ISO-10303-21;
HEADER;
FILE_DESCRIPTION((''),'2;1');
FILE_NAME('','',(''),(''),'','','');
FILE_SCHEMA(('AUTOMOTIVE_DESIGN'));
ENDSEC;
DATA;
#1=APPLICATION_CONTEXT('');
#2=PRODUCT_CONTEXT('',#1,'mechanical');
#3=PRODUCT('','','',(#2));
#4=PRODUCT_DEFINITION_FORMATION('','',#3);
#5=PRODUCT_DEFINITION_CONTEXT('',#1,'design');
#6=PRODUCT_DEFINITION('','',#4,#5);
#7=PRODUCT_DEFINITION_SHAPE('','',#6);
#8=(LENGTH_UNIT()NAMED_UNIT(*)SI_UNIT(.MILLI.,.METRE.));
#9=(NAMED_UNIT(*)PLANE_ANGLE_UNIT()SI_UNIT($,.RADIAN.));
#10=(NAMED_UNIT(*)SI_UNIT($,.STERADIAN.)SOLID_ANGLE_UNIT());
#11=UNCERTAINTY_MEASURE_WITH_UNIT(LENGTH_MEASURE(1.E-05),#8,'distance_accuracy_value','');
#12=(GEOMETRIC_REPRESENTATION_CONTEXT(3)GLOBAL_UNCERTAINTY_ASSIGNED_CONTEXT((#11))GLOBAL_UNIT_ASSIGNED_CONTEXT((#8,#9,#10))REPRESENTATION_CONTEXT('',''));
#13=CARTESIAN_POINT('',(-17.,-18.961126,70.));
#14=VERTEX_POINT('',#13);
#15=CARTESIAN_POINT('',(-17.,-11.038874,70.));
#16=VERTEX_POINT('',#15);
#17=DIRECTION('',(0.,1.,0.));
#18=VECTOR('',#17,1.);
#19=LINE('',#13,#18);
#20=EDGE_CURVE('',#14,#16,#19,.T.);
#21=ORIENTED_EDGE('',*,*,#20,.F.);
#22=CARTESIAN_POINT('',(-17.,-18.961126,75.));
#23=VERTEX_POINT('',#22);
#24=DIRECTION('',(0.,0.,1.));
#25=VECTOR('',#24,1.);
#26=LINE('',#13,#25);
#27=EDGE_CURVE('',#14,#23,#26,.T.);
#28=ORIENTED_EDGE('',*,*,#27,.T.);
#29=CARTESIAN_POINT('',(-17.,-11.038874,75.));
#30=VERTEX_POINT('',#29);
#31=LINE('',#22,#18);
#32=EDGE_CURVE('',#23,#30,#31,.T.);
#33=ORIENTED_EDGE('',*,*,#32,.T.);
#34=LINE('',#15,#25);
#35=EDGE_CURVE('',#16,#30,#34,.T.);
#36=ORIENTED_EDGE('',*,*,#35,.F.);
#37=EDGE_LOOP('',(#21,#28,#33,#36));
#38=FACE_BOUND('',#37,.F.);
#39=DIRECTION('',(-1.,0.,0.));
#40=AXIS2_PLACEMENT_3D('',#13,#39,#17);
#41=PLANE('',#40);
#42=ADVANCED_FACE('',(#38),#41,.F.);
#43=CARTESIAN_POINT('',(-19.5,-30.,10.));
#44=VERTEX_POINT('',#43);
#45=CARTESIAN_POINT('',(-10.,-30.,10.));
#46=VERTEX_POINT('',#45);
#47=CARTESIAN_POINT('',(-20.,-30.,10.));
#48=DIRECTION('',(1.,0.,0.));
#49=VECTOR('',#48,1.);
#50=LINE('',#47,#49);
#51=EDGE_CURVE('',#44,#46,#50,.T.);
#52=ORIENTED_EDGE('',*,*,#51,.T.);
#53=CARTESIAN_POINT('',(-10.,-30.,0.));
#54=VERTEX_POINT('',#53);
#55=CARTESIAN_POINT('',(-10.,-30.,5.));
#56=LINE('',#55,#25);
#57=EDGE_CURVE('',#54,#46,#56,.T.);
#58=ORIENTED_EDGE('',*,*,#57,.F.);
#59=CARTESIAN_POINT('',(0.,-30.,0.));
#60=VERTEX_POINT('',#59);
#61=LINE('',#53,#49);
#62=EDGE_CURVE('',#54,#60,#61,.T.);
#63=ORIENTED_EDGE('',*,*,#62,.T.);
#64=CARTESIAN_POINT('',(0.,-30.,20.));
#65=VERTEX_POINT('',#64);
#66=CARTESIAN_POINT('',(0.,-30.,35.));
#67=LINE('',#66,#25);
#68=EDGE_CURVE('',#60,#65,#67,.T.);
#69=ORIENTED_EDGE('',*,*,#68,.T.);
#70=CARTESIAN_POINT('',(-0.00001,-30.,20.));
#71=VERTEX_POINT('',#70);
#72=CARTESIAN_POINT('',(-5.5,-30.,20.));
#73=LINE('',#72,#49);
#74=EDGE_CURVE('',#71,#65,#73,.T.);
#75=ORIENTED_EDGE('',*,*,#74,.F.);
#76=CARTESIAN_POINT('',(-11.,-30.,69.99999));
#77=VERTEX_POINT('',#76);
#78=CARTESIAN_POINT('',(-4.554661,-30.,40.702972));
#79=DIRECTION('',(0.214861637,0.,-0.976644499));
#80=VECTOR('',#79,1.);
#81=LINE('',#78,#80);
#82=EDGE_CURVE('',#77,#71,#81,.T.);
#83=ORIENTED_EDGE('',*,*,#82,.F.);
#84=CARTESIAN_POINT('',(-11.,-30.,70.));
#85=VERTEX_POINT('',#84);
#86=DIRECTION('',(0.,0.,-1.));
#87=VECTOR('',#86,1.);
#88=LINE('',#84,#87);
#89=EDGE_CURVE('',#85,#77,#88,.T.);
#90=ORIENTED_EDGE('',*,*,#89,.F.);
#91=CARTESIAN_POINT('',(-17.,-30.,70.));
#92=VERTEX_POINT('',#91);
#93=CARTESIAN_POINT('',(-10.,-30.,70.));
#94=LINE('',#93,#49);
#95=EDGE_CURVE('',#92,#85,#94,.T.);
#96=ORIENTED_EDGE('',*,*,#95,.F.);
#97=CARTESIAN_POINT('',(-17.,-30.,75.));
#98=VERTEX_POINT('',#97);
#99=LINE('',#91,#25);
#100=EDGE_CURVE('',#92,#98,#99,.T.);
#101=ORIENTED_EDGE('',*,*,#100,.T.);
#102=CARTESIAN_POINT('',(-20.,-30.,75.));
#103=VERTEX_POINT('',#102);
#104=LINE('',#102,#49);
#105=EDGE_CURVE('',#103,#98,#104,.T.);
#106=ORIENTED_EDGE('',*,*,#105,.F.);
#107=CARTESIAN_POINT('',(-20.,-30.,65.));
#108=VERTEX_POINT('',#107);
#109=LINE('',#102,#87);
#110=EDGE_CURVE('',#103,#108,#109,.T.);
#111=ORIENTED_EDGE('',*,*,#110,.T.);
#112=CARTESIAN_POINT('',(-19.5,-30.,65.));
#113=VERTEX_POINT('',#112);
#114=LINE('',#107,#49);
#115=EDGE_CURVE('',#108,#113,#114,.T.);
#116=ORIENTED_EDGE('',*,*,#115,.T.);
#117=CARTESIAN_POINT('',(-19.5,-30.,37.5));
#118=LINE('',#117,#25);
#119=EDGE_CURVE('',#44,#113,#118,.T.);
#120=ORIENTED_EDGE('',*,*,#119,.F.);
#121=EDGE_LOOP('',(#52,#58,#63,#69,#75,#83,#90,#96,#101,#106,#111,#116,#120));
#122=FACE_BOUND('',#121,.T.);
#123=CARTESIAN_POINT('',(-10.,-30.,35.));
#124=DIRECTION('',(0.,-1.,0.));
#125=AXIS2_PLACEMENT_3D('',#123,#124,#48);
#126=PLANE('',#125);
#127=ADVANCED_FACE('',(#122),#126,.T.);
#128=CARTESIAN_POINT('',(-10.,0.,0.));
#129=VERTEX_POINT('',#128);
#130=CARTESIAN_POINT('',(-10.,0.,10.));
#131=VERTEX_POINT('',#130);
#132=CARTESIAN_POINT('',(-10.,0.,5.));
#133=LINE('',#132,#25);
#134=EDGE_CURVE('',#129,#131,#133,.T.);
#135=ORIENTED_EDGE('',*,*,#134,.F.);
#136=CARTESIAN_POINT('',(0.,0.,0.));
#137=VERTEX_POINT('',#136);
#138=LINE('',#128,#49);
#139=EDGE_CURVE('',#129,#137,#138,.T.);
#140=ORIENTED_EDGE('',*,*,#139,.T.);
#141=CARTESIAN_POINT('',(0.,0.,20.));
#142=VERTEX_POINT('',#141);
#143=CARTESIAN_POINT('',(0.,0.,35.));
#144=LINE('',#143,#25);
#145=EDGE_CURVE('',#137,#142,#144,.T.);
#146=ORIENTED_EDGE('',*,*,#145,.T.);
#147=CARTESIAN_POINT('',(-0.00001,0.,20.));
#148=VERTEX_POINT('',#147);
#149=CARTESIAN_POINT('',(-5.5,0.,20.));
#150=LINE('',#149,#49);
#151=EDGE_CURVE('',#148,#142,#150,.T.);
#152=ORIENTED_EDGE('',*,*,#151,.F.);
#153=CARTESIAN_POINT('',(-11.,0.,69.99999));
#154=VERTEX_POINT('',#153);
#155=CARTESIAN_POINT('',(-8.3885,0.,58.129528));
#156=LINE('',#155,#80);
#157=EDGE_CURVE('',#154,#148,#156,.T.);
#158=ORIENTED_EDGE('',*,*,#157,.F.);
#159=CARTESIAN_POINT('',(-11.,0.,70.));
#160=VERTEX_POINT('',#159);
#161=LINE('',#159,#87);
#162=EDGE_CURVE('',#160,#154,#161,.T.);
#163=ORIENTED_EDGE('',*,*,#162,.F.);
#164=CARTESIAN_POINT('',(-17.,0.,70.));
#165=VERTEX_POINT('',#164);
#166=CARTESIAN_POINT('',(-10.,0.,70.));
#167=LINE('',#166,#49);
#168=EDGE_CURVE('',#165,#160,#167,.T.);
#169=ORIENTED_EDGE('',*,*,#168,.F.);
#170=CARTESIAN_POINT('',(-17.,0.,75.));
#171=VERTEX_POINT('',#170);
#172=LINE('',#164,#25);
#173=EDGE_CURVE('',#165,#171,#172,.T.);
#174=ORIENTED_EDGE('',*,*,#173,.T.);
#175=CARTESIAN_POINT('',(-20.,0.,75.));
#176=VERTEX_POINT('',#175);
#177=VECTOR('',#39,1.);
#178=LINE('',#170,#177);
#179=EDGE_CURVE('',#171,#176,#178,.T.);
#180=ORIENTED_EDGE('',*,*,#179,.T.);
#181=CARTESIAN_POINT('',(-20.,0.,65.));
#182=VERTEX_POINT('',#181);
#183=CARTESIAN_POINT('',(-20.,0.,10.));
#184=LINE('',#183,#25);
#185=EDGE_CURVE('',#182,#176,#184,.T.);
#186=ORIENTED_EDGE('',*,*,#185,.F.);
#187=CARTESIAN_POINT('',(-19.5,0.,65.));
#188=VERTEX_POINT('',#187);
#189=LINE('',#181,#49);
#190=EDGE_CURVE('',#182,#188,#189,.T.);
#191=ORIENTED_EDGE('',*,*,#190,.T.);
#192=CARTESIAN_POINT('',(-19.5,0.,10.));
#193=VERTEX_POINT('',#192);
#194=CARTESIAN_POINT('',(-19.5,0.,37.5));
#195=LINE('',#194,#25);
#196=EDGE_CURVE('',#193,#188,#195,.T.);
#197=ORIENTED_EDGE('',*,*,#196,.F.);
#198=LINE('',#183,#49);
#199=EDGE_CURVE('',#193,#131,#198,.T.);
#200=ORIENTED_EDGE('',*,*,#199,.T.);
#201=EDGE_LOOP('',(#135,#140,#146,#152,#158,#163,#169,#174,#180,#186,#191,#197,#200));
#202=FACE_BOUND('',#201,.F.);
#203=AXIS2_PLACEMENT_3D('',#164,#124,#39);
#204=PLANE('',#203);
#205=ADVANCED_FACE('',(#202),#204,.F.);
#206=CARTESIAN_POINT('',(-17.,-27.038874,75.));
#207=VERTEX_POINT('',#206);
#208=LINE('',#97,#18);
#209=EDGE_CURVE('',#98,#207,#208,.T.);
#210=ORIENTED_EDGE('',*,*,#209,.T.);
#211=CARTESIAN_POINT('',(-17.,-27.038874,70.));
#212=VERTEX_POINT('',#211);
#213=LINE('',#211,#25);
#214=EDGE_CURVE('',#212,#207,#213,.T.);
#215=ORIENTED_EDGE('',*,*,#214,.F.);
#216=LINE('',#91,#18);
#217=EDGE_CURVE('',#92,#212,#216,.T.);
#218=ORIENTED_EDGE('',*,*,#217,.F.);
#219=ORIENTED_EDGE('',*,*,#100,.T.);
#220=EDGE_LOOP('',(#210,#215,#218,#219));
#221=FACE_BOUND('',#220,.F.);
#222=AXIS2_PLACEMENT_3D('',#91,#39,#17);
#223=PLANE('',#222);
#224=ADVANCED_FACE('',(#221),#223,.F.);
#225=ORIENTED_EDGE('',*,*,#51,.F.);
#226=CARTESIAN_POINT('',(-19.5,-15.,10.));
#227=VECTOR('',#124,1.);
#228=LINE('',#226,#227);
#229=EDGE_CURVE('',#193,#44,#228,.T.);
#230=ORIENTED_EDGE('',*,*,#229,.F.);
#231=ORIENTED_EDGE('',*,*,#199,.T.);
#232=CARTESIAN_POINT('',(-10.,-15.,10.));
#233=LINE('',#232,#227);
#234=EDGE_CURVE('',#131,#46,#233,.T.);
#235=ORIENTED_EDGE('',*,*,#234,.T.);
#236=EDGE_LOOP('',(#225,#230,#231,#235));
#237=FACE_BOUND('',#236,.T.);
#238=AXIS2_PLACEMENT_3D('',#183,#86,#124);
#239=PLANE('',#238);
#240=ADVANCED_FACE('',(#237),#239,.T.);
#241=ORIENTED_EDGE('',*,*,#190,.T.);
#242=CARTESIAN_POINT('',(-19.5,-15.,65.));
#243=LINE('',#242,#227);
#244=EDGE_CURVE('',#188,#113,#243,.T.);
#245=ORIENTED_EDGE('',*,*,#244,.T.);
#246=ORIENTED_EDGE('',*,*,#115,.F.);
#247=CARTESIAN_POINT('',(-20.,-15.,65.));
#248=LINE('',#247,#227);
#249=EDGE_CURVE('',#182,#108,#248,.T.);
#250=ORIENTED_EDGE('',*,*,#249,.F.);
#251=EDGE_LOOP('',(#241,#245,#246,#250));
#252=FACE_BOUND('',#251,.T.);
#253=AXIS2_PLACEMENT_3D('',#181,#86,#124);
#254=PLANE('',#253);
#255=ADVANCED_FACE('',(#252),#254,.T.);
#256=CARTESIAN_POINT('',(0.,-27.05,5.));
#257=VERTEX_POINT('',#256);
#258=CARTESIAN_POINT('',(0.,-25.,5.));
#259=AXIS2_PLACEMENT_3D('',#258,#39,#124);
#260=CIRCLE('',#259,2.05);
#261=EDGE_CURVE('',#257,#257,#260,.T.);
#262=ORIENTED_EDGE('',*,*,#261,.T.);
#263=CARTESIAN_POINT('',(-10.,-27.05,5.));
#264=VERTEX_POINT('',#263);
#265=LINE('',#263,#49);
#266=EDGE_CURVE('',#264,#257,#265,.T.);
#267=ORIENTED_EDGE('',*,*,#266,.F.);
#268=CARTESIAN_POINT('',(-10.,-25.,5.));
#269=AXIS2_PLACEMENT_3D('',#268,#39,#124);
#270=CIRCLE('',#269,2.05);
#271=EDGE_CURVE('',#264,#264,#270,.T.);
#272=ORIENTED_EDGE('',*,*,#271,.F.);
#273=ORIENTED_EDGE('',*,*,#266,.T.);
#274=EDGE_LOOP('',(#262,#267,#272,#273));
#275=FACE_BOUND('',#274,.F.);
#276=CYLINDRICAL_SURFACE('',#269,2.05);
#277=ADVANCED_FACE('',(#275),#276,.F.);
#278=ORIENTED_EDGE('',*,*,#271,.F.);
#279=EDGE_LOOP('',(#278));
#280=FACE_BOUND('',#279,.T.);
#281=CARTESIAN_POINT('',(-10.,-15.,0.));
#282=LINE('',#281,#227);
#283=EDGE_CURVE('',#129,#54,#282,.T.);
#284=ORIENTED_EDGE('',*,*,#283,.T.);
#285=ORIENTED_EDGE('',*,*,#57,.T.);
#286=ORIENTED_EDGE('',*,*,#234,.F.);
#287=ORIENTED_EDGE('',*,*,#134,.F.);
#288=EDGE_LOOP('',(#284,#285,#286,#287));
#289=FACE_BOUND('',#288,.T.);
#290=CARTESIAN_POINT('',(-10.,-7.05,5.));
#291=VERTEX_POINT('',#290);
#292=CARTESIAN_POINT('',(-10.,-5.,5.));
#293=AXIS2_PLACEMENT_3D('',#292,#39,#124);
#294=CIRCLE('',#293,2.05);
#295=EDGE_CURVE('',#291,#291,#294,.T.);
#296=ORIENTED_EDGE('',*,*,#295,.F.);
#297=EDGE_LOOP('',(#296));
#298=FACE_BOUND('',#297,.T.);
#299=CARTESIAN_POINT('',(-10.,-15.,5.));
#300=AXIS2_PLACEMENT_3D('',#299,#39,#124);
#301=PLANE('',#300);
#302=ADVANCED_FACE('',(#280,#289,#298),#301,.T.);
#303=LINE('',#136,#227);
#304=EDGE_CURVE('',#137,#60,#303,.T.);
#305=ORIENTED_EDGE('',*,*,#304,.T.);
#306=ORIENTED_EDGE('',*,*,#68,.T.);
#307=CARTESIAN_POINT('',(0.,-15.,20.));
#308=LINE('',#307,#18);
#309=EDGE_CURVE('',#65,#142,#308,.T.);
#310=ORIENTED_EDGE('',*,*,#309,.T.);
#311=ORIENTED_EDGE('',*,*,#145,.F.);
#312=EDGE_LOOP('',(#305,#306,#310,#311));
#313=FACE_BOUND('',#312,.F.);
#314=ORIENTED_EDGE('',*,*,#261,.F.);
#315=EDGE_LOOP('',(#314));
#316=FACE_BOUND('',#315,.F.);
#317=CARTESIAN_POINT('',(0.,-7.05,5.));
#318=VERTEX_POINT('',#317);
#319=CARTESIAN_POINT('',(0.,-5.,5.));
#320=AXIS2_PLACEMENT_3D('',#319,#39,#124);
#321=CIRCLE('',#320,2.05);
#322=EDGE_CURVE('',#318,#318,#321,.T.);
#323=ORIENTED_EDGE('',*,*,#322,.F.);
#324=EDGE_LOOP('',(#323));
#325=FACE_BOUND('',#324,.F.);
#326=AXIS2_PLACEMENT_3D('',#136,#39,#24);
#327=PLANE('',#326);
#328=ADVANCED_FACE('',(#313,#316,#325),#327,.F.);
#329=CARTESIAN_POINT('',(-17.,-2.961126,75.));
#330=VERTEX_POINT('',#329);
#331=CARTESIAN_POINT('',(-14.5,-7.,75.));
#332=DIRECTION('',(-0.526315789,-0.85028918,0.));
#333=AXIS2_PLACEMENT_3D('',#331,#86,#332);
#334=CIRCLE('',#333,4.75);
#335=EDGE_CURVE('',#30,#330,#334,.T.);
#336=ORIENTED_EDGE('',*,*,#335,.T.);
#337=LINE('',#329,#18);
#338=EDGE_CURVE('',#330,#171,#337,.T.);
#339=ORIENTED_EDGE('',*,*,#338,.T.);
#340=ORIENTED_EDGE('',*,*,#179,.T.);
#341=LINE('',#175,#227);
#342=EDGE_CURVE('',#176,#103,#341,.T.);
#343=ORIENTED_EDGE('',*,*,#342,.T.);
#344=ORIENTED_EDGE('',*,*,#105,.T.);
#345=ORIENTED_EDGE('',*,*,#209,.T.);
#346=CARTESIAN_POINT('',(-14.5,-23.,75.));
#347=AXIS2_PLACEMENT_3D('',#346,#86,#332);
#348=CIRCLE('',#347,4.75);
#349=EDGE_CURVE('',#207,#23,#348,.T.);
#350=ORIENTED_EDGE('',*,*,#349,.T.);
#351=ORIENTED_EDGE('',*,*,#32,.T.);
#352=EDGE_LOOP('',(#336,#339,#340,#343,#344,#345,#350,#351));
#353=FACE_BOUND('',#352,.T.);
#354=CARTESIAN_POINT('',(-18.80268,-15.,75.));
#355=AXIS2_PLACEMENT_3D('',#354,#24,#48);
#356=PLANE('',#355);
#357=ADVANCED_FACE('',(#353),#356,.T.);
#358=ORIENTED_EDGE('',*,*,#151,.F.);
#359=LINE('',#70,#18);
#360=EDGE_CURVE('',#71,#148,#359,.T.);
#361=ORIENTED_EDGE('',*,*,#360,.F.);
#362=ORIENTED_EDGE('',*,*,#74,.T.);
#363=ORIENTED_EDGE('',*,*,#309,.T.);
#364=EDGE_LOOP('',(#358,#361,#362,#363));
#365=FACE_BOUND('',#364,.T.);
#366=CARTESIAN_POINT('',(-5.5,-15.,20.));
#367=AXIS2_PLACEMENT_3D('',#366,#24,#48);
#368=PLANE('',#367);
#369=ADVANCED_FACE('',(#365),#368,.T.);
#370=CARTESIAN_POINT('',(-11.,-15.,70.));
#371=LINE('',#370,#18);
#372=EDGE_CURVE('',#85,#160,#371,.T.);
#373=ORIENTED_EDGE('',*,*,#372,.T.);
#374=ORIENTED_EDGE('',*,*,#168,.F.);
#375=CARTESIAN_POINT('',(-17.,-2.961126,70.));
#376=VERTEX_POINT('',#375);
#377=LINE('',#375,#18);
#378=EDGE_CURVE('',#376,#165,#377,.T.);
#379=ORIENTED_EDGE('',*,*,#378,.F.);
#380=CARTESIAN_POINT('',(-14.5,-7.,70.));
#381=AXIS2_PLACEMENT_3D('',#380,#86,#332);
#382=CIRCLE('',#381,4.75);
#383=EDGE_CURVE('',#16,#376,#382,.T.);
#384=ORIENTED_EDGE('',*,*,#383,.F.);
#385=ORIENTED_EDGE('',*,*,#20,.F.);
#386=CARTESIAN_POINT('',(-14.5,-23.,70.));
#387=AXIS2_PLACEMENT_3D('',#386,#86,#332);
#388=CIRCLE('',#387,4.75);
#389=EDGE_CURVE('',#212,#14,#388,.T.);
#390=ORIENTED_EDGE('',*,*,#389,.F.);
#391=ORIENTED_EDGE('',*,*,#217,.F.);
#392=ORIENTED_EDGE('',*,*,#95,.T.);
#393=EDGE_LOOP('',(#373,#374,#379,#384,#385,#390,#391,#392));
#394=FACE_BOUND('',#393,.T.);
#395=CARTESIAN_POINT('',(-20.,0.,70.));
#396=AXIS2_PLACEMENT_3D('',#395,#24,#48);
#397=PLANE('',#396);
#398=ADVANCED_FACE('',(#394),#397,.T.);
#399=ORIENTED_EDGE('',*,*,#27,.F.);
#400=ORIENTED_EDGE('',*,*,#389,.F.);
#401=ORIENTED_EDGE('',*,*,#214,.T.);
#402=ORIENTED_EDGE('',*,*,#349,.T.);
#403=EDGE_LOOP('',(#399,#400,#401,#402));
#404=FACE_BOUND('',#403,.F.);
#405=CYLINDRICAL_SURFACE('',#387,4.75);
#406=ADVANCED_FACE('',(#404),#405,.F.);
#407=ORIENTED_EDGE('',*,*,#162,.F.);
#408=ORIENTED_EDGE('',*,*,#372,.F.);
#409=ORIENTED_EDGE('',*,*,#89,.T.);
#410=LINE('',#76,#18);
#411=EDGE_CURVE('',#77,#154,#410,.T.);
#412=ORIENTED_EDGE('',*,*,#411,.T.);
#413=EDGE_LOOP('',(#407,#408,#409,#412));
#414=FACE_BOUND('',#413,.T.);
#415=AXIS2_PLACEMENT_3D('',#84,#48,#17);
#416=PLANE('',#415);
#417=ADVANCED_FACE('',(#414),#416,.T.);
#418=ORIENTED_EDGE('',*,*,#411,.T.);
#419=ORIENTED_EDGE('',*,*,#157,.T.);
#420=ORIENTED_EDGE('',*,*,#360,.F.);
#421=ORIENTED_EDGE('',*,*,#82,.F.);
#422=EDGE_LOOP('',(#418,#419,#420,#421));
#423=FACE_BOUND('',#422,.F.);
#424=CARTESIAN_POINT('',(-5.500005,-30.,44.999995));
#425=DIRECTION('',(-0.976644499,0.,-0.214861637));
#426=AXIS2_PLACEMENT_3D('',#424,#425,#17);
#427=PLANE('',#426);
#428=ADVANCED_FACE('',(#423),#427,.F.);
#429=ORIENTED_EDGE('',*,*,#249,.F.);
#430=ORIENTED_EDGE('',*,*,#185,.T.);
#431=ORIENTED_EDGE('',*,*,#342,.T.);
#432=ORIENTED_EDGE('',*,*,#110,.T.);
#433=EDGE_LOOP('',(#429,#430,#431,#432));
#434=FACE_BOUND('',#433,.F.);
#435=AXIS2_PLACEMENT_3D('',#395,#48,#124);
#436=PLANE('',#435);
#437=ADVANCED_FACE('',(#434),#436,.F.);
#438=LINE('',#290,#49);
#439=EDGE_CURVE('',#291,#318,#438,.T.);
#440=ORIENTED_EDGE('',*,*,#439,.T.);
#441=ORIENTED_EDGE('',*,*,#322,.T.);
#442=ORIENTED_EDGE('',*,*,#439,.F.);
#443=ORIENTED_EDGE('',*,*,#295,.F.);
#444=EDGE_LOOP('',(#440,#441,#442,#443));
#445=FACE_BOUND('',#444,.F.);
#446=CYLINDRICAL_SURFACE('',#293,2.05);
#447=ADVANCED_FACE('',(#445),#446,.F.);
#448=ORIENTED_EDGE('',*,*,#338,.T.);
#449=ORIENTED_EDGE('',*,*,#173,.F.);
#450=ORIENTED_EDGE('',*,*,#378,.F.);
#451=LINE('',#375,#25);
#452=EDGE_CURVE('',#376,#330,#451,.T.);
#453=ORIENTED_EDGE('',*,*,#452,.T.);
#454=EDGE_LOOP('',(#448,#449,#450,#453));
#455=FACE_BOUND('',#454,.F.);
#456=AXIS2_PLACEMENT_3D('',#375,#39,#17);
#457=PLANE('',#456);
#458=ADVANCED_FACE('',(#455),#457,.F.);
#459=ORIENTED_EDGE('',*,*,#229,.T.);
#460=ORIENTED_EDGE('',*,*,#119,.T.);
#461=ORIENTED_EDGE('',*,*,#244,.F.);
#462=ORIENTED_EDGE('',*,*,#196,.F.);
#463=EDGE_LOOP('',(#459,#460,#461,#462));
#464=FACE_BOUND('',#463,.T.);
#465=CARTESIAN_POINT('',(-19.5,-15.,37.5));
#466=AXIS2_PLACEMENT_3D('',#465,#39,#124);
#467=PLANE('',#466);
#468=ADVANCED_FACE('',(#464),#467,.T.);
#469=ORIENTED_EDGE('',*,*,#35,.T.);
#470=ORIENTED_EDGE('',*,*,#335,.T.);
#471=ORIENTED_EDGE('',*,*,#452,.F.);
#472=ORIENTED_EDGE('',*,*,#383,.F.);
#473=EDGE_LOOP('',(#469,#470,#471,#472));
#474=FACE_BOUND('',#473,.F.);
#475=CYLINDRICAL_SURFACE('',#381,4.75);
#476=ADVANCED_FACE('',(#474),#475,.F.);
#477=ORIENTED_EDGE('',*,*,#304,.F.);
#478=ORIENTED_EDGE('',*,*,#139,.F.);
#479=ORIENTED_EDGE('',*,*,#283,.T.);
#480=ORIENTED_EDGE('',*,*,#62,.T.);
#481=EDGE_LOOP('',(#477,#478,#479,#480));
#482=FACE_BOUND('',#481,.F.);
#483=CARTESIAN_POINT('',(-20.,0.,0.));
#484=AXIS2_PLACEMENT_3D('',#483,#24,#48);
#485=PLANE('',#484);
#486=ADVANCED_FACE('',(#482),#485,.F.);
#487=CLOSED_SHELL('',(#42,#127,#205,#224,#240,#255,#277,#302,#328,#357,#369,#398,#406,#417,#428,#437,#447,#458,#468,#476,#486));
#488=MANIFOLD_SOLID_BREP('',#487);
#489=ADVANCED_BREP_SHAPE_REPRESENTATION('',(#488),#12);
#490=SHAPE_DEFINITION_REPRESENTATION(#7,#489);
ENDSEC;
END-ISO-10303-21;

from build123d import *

# Parameters (mm, degrees)
F0_W      = 20
F0_H      = 70
F1_DEPTH  = 30
F2_W      = 30
F2_H      = 10
F3_DEPTH  = 10
F4_R      = 2.05
F5_DEPTH  = 10
F6_W      = 11
F6_H      = 30
F7_DEPTH  = 50
F9_DEPTH  = 5
F10_SIZE2 = 10.99999
F10_SIZE  = 49.99999
F11_W     = 30
F11_H     = 55
F12_DEPTH = 0.5


# Not quite as in the source:
# - a fillet or chamfer is up to 0.001 mm smaller than in the source, because OpenCascade refuses the exact size


with BuildPart() as f1:
    # F0 (on Front) → F1 (new body)
    with BuildSketch(Plane.XZ):
        with Locations((-10, 35)):
            Rectangle(F0_W, F0_H)
    extrude(amount=F1_DEPTH)

    # F2 (on face) → F3 (cut)
    with BuildSketch(Plane(origin=(-20, 0, 0), x_dir=(0, -1, 0), z_dir=(-1, 0, 0))):
        with Locations((15, 5)):
            Rectangle(F2_W, F2_H)
    extrude(amount=-F3_DEPTH, mode=Mode.SUBTRACT)

    # F4 (on face) → F5 (cut, through all)
    with BuildSketch(Plane(origin=(-10, 0, 0), x_dir=(0, -1, 0), z_dir=(-1, 0, 0))):
        with Locations((5, 5)):
            Circle(F4_R)
        with Locations((25, 5)):
            Circle(F4_R)
    extrude(amount=-F5_DEPTH, mode=Mode.SUBTRACT)

    # F6 (on face) → F7 (cut)
    with BuildSketch(Plane.XY.offset(70)):
        with Locations((-5.5, -15)):
            Rectangle(F6_W, F6_H)
    extrude(amount=-F7_DEPTH, mode=Mode.SUBTRACT)

    # F8 (on face) → F9 (join)
    with BuildSketch(Plane.XY.offset(70)):
        with BuildLine():
            ThreePointArc((-17, -11.0388736054), (-19.25, -7), (-17, -2.9611263946))
            Line((-17, -2.9611263946), (-17, 0))
            Line((-17, 0), (-20, 0))
            Line((-20, 0), (-20, -30))
            Line((-20, -30), (-17, -30))
            Line((-17, -30), (-17, -27.0388736054))
            ThreePointArc((-17, -27.0388736054), (-19.25, -23), (-17, -18.9611263946))
            Line((-17, -18.9611263946), (-17, -11.0388736054))
        make_face()
    extrude(amount=F9_DEPTH)

    # F10 (size 50 and 11 in the source; OpenCascade refuses exactly that, so slightly less here)
    f10_edges = [f1.edges().sort_by_distance(p)[0] for p in [
        (-11, -15, 20),
    ]]
    f10_side = f1.faces().sort_by_distance((-11, -15, 45))[0]
    chamfer(f10_edges, length=F10_SIZE, length2=F10_SIZE2, reference=f10_side)

    # F11 (on face) → F12 (cut)
    with BuildSketch(Plane(origin=(-20, 0, 0), x_dir=(0, -1, 0), z_dir=(-1, 0, 0))):
        with Locations((15, 37.5)):
            Rectangle(F11_W, F11_H)
    extrude(amount=-F12_DEPTH, mode=Mode.SUBTRACT)


solid = f1.part
